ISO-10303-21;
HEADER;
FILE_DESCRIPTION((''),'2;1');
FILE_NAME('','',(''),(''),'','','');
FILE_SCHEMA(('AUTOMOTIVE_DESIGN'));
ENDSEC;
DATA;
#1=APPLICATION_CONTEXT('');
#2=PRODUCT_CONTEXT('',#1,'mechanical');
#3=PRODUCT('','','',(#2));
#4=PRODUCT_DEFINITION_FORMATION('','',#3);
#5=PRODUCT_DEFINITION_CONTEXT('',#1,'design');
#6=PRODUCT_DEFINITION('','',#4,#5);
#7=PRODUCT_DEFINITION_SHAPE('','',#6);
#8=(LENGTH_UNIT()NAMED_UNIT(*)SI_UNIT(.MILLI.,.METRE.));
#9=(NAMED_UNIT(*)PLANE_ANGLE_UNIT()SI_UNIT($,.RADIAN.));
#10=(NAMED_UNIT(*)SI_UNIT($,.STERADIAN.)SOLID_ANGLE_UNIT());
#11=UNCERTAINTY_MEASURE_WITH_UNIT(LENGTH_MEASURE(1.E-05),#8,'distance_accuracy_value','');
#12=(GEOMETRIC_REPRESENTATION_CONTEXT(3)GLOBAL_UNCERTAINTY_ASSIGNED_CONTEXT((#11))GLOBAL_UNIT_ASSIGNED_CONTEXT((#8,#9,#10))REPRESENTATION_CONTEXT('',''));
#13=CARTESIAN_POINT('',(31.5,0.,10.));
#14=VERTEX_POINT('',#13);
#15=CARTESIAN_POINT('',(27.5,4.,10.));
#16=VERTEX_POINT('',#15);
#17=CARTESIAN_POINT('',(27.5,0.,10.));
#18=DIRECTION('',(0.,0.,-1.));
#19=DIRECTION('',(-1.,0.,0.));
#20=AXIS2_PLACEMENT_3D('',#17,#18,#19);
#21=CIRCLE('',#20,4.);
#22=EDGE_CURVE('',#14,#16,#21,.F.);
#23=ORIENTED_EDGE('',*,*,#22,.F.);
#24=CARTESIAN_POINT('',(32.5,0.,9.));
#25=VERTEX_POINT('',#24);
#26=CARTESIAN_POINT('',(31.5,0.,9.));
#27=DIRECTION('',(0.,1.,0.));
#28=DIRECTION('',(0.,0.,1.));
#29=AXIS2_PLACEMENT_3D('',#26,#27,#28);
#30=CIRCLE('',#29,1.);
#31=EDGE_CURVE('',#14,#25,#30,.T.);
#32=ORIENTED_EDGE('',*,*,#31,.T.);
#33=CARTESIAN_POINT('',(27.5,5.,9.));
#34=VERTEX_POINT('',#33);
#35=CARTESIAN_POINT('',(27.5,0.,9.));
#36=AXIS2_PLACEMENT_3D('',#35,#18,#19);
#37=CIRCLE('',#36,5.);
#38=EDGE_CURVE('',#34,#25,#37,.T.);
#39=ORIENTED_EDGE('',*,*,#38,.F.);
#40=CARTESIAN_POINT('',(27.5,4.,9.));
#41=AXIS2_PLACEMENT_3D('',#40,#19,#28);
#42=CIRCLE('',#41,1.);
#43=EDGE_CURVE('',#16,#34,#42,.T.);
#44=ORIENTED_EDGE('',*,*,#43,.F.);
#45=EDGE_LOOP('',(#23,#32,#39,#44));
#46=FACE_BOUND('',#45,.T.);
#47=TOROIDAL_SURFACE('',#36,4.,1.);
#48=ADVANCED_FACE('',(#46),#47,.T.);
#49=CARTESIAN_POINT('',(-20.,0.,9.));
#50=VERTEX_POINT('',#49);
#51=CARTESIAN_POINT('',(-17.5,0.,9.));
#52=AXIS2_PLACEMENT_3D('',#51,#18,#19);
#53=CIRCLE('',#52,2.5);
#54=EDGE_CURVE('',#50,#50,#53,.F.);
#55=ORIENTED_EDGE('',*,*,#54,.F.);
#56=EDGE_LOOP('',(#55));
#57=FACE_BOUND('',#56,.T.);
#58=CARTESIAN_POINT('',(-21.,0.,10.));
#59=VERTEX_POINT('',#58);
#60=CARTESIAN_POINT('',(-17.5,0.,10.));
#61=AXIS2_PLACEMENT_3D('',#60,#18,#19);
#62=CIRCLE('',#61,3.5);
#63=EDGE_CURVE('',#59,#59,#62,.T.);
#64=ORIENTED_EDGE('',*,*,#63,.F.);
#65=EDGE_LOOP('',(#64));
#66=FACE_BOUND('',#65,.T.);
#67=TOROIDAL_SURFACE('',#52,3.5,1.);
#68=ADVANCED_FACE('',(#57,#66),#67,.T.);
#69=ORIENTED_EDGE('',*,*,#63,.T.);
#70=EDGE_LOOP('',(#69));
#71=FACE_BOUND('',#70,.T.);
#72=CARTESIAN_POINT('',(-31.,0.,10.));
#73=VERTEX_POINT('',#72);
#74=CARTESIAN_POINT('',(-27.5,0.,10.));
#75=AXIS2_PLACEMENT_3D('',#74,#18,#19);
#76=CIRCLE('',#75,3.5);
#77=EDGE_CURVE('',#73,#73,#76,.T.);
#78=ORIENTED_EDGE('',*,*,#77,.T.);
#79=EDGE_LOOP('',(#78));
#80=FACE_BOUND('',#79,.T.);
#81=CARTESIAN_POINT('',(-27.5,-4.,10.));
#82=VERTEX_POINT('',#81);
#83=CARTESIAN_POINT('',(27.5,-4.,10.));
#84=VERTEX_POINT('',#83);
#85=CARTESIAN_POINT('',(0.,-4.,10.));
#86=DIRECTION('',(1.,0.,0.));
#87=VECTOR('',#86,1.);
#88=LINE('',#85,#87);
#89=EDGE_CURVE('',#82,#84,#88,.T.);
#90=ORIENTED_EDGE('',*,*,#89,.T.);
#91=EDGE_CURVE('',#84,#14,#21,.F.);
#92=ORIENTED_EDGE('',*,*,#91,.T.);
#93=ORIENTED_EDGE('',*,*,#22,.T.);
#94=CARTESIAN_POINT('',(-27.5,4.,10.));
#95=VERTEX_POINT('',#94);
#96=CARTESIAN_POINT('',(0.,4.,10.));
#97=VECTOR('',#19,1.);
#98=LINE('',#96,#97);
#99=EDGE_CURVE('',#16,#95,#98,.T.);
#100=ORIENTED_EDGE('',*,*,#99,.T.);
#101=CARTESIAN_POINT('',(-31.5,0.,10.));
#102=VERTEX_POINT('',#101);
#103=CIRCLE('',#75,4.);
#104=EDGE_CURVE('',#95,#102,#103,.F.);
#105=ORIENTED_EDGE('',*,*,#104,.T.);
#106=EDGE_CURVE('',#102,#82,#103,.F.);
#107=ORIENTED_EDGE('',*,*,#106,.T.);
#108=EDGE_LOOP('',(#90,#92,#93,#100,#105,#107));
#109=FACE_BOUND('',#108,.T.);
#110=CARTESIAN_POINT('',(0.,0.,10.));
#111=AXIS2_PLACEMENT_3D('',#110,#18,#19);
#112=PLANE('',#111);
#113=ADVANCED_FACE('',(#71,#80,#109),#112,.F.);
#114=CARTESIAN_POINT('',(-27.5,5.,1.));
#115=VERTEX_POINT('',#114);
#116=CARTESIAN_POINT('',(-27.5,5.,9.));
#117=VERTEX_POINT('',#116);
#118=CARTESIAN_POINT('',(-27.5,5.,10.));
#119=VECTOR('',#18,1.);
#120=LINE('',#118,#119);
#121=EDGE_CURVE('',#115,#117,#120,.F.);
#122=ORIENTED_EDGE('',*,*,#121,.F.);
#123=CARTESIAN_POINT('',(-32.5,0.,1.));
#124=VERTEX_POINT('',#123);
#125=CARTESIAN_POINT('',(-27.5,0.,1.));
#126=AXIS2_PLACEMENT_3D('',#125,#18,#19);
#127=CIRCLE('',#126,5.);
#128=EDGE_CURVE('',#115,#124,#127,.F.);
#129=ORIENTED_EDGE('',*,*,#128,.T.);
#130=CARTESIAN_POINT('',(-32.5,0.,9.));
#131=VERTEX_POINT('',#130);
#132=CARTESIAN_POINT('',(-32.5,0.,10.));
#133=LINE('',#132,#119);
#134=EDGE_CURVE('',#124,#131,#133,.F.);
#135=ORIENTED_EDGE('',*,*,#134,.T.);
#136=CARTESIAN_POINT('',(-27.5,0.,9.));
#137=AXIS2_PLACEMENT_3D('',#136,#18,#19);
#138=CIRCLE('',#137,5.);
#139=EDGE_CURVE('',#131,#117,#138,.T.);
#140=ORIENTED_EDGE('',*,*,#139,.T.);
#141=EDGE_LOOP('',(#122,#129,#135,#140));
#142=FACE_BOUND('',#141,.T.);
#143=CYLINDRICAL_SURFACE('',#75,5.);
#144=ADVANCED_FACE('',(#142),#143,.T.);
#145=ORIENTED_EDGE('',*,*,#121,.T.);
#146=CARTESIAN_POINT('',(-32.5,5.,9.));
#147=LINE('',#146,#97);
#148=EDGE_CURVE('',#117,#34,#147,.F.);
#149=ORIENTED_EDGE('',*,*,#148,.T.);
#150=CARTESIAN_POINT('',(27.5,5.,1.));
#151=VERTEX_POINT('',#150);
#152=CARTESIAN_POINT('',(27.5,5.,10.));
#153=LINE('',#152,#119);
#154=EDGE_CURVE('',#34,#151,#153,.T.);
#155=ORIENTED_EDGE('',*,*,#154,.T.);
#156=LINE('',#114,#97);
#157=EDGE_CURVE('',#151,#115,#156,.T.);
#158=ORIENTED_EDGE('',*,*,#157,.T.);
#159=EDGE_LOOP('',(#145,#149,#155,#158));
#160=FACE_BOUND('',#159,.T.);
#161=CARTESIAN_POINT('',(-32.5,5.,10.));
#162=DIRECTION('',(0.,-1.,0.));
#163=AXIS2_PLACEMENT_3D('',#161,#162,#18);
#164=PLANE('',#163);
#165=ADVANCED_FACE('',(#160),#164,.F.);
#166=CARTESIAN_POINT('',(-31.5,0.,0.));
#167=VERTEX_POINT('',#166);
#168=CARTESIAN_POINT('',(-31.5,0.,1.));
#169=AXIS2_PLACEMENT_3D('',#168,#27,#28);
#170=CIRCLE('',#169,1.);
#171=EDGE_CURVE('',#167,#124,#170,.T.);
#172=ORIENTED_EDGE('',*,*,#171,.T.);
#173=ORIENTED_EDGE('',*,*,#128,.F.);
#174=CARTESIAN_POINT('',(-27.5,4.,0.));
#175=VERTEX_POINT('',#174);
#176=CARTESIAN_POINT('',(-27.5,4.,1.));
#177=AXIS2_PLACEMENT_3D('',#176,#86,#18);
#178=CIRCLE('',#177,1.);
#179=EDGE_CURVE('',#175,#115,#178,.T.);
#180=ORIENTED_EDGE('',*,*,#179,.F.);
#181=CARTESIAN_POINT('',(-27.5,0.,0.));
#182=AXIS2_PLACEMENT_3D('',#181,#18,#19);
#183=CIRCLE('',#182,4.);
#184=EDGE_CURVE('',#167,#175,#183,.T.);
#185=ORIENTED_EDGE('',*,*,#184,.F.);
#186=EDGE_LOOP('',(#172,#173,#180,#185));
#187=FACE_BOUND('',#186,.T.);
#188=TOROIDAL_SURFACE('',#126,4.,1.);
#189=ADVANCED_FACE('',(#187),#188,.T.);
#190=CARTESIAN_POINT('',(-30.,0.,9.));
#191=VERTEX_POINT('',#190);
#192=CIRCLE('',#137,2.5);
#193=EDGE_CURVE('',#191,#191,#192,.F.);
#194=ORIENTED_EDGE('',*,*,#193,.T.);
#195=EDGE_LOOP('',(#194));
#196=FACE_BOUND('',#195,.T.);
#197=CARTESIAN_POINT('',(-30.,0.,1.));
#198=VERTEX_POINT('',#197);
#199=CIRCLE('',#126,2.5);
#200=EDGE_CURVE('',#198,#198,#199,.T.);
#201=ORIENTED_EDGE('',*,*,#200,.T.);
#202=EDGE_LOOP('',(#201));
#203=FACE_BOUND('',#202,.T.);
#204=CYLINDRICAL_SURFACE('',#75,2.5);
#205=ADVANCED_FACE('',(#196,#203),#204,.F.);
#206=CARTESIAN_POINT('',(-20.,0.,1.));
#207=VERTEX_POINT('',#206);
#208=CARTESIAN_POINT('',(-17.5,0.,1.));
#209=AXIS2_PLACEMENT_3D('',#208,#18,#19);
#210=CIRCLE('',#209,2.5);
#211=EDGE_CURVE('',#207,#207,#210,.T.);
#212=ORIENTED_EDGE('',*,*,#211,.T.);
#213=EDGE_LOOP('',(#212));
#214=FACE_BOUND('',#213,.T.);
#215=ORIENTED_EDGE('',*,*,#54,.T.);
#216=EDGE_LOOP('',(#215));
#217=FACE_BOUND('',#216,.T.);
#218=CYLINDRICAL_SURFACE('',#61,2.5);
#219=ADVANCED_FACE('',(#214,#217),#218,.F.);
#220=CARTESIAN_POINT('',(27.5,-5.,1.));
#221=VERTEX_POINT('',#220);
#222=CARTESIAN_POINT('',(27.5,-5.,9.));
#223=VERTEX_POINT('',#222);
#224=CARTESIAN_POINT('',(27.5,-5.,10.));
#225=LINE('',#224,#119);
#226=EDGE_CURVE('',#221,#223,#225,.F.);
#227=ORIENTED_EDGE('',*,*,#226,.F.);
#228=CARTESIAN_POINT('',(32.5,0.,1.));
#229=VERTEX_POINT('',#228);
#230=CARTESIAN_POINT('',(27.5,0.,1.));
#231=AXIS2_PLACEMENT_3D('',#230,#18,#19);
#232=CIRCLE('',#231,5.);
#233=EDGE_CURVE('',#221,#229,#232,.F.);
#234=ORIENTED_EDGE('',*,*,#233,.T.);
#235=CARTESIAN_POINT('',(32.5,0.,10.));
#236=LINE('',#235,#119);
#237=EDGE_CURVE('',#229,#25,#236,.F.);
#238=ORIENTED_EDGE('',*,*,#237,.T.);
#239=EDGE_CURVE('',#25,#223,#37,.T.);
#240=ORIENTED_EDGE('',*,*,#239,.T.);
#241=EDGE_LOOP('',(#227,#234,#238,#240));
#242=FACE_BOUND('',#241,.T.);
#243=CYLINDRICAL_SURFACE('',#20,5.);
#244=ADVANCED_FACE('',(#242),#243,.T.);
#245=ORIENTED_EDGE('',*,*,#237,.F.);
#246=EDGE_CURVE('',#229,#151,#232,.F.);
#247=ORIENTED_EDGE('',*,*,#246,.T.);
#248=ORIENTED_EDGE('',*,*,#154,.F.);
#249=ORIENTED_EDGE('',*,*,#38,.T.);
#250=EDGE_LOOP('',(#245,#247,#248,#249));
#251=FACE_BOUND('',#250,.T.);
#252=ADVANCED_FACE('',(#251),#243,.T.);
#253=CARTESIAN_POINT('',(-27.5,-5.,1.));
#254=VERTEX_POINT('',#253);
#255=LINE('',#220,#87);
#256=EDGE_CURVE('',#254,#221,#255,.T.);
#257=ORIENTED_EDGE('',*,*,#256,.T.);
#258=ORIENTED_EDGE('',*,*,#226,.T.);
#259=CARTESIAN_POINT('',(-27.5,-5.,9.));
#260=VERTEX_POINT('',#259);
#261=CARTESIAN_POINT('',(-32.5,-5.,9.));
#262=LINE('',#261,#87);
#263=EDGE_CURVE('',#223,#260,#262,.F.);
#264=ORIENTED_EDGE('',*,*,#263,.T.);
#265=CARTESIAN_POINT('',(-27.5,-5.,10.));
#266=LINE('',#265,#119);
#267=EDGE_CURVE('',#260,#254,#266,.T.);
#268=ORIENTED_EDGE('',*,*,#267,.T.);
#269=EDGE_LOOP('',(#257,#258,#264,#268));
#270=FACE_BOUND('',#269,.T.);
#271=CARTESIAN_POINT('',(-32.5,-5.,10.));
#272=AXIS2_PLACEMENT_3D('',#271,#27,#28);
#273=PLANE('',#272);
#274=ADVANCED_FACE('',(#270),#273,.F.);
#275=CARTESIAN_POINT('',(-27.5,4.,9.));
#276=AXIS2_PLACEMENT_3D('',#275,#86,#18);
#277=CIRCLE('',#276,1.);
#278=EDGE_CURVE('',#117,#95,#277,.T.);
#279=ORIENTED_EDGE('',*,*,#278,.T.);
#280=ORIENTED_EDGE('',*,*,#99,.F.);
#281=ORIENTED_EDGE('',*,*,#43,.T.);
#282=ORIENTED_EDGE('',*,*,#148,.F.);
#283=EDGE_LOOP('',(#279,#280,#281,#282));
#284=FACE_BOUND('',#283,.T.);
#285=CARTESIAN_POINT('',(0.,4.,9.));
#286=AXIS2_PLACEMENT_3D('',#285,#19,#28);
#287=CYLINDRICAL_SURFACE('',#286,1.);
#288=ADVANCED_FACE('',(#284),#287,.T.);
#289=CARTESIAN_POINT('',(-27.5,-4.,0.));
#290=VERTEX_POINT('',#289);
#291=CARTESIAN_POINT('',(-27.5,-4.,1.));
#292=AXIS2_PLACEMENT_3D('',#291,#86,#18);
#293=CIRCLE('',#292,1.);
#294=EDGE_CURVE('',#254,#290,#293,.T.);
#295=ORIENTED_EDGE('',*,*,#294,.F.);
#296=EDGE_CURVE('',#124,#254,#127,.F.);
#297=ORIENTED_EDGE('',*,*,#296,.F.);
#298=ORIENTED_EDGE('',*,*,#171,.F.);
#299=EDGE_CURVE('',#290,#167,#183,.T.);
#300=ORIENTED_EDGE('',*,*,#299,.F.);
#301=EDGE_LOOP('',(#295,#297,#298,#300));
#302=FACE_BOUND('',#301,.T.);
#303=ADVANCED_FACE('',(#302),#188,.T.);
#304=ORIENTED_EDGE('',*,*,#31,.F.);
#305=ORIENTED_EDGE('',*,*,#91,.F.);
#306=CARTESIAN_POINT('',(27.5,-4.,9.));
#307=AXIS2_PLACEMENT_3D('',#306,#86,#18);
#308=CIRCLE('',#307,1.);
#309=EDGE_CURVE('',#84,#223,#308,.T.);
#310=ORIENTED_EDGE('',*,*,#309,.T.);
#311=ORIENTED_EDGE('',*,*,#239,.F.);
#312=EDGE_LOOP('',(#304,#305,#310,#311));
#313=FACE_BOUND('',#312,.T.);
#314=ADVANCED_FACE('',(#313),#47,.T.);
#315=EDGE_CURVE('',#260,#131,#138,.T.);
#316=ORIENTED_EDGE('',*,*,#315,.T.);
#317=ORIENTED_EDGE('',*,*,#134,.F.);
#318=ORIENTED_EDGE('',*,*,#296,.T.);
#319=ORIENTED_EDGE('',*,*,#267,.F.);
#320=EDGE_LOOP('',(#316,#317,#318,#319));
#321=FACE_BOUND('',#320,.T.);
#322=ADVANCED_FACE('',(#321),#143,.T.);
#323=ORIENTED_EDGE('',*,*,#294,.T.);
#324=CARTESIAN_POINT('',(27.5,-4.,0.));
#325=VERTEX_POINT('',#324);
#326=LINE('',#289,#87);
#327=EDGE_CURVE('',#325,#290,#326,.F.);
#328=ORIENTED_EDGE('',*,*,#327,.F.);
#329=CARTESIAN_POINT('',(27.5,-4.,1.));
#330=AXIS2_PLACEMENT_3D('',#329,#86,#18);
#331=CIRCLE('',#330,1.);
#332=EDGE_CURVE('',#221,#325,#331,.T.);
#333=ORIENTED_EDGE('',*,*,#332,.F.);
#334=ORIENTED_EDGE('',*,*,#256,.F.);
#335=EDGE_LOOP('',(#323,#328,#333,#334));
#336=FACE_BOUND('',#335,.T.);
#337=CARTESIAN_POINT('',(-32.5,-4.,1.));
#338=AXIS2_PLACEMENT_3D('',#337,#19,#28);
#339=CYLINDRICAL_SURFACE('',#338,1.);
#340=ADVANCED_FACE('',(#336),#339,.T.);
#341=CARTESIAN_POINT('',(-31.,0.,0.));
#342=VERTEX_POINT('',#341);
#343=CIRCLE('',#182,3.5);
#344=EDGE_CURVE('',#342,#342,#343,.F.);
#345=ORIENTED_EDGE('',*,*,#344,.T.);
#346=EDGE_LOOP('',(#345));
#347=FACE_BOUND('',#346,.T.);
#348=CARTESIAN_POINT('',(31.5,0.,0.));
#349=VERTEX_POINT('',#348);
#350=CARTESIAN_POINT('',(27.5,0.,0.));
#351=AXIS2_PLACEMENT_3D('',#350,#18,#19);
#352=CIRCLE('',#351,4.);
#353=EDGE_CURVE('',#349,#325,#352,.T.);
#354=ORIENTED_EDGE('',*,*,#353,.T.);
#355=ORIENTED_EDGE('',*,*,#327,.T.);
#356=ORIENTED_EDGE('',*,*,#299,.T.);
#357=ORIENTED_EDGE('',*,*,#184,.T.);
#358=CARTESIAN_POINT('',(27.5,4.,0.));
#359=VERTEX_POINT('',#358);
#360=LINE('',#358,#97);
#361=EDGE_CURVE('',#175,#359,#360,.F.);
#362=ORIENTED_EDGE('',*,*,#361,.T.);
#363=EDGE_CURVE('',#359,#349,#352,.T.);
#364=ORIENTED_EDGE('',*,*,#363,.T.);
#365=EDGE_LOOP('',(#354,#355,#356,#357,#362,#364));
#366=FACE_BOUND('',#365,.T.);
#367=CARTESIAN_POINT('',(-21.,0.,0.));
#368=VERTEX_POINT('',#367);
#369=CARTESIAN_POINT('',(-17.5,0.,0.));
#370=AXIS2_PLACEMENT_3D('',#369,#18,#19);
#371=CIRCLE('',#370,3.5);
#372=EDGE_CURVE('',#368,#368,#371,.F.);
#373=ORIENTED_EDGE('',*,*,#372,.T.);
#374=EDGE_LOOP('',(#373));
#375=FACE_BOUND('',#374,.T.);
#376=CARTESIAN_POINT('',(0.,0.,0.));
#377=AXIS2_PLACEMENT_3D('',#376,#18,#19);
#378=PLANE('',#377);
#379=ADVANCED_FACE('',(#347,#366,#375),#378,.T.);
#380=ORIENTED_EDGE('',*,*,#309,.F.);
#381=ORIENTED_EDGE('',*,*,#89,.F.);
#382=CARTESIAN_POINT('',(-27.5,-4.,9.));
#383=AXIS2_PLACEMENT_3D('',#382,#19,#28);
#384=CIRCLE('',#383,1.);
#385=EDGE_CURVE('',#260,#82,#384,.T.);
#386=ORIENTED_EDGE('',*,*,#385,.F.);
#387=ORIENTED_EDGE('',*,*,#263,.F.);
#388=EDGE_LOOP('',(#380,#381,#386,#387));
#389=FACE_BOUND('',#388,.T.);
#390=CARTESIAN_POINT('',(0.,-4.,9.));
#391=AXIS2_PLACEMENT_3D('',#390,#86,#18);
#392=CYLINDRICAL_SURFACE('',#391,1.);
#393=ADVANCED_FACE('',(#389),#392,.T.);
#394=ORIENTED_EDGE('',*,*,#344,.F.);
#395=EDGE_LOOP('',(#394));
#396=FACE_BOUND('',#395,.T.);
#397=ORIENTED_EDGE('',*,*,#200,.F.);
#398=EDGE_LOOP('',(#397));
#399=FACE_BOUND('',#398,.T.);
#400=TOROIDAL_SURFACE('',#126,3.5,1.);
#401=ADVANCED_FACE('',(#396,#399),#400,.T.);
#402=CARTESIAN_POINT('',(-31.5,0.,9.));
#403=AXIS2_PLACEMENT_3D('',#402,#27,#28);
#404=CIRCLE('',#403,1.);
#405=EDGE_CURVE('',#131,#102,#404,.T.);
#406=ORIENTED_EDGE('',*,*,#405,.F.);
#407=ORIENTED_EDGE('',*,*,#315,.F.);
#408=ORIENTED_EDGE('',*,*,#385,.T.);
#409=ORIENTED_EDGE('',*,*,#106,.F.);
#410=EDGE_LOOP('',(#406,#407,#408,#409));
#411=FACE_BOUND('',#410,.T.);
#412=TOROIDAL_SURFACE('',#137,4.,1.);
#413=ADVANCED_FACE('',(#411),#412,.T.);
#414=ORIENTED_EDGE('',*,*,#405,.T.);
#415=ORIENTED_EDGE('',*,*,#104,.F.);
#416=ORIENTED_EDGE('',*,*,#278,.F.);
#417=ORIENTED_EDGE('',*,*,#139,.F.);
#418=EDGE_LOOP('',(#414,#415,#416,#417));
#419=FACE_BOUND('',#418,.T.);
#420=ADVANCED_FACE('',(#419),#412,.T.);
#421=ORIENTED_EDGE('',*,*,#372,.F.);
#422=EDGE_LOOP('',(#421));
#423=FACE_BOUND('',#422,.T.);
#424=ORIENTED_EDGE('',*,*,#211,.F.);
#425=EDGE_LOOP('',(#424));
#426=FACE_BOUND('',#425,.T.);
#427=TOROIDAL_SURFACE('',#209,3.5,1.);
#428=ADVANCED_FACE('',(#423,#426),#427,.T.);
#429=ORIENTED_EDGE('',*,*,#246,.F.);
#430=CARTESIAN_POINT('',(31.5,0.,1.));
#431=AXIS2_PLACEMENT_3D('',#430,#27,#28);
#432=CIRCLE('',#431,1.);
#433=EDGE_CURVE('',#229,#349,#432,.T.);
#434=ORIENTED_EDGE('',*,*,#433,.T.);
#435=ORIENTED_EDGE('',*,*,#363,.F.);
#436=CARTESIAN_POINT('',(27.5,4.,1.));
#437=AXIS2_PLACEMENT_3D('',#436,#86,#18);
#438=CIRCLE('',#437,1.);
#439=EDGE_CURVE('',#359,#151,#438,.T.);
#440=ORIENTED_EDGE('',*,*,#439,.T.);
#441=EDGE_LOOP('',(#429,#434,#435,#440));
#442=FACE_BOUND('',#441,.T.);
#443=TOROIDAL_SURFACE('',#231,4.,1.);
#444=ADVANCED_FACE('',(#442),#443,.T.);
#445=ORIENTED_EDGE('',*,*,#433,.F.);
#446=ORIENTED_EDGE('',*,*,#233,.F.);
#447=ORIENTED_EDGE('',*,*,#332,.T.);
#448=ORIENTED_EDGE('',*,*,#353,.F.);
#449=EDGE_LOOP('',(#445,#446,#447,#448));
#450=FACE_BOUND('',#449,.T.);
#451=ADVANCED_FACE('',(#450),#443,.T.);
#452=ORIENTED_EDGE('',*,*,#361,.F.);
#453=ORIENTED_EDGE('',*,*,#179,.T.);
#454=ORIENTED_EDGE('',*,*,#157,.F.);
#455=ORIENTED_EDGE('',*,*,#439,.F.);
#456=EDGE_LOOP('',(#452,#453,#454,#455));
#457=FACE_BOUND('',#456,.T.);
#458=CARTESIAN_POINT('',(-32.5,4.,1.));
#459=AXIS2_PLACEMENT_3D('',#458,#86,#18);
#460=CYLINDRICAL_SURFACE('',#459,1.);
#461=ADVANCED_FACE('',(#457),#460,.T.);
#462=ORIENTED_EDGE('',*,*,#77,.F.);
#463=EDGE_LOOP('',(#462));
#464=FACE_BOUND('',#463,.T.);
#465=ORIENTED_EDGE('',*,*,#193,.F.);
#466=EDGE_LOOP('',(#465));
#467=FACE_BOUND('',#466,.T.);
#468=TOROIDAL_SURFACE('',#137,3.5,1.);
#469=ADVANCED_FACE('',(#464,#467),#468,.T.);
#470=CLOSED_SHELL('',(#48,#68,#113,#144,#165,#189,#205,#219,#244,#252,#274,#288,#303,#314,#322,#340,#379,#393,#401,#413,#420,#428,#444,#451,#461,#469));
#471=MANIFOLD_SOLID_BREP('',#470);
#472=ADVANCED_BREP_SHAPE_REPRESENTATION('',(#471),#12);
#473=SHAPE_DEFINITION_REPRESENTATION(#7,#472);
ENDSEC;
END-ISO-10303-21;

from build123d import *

# Parameters (mm, degrees)
SKETCH1_W           = 65
SKETCH1_H           = 10
SKETCH1_R           = 2.5
BOSS_EXTRUDE1_DEPTH = 10
FILLET1_R           = 5
FILLET2_R           = 1


with BuildPart() as part:
    # Sketch1 → Boss-Extrude1 (new body)
    with BuildSketch(Plane.XY):
        Rectangle(SKETCH1_W, SKETCH1_H)
        with Locations((-27.5, 0)):
            Circle(SKETCH1_R, mode=Mode.SUBTRACT)
        with Locations((-17.5, 0)):
            Circle(SKETCH1_R, mode=Mode.SUBTRACT)
    extrude(amount=BOSS_EXTRUDE1_DEPTH)

    # Fillet1
    fillet1_edges = [part.edges().sort_by_distance(p)[0] for p in [
        (32.5, -5, 5),
        (32.5, 5, 5),
        (-32.5, 5, 5),
        (-32.5, -5, 5),
    ]]
    fillet(fillet1_edges, radius=FILLET1_R - 0.0001)  # a hair under: the kernel refuses the full size

    # Fillet2
    fillet2_edges = [part.edges().sort_by_distance(p)[0] for p in [
        (-30, 0, 0),
        (-30, 0, 10),
        (-20, 0, 0),
        (-20, 0, 10),
        (0, -5, 0),
        (0, 5, 0),
        (-31.035563195, -3.535563195, 0),
        (-31.035563195, 3.535563195, 0),
        (31.035563195, 3.535563195, 0),
        (31.035563195, -3.535563195, 0),
        (0, -5, 10),
        (0, 5, 10),
        (-31.035563195, -3.535563195, 10),
        (-31.035563195, 3.535563195, 10),
        (31.035563195, 3.535563195, 10),
        (31.035563195, -3.535563195, 10),
    ]]
    fillet(fillet2_edges, radius=FILLET2_R)


solid = part.part
